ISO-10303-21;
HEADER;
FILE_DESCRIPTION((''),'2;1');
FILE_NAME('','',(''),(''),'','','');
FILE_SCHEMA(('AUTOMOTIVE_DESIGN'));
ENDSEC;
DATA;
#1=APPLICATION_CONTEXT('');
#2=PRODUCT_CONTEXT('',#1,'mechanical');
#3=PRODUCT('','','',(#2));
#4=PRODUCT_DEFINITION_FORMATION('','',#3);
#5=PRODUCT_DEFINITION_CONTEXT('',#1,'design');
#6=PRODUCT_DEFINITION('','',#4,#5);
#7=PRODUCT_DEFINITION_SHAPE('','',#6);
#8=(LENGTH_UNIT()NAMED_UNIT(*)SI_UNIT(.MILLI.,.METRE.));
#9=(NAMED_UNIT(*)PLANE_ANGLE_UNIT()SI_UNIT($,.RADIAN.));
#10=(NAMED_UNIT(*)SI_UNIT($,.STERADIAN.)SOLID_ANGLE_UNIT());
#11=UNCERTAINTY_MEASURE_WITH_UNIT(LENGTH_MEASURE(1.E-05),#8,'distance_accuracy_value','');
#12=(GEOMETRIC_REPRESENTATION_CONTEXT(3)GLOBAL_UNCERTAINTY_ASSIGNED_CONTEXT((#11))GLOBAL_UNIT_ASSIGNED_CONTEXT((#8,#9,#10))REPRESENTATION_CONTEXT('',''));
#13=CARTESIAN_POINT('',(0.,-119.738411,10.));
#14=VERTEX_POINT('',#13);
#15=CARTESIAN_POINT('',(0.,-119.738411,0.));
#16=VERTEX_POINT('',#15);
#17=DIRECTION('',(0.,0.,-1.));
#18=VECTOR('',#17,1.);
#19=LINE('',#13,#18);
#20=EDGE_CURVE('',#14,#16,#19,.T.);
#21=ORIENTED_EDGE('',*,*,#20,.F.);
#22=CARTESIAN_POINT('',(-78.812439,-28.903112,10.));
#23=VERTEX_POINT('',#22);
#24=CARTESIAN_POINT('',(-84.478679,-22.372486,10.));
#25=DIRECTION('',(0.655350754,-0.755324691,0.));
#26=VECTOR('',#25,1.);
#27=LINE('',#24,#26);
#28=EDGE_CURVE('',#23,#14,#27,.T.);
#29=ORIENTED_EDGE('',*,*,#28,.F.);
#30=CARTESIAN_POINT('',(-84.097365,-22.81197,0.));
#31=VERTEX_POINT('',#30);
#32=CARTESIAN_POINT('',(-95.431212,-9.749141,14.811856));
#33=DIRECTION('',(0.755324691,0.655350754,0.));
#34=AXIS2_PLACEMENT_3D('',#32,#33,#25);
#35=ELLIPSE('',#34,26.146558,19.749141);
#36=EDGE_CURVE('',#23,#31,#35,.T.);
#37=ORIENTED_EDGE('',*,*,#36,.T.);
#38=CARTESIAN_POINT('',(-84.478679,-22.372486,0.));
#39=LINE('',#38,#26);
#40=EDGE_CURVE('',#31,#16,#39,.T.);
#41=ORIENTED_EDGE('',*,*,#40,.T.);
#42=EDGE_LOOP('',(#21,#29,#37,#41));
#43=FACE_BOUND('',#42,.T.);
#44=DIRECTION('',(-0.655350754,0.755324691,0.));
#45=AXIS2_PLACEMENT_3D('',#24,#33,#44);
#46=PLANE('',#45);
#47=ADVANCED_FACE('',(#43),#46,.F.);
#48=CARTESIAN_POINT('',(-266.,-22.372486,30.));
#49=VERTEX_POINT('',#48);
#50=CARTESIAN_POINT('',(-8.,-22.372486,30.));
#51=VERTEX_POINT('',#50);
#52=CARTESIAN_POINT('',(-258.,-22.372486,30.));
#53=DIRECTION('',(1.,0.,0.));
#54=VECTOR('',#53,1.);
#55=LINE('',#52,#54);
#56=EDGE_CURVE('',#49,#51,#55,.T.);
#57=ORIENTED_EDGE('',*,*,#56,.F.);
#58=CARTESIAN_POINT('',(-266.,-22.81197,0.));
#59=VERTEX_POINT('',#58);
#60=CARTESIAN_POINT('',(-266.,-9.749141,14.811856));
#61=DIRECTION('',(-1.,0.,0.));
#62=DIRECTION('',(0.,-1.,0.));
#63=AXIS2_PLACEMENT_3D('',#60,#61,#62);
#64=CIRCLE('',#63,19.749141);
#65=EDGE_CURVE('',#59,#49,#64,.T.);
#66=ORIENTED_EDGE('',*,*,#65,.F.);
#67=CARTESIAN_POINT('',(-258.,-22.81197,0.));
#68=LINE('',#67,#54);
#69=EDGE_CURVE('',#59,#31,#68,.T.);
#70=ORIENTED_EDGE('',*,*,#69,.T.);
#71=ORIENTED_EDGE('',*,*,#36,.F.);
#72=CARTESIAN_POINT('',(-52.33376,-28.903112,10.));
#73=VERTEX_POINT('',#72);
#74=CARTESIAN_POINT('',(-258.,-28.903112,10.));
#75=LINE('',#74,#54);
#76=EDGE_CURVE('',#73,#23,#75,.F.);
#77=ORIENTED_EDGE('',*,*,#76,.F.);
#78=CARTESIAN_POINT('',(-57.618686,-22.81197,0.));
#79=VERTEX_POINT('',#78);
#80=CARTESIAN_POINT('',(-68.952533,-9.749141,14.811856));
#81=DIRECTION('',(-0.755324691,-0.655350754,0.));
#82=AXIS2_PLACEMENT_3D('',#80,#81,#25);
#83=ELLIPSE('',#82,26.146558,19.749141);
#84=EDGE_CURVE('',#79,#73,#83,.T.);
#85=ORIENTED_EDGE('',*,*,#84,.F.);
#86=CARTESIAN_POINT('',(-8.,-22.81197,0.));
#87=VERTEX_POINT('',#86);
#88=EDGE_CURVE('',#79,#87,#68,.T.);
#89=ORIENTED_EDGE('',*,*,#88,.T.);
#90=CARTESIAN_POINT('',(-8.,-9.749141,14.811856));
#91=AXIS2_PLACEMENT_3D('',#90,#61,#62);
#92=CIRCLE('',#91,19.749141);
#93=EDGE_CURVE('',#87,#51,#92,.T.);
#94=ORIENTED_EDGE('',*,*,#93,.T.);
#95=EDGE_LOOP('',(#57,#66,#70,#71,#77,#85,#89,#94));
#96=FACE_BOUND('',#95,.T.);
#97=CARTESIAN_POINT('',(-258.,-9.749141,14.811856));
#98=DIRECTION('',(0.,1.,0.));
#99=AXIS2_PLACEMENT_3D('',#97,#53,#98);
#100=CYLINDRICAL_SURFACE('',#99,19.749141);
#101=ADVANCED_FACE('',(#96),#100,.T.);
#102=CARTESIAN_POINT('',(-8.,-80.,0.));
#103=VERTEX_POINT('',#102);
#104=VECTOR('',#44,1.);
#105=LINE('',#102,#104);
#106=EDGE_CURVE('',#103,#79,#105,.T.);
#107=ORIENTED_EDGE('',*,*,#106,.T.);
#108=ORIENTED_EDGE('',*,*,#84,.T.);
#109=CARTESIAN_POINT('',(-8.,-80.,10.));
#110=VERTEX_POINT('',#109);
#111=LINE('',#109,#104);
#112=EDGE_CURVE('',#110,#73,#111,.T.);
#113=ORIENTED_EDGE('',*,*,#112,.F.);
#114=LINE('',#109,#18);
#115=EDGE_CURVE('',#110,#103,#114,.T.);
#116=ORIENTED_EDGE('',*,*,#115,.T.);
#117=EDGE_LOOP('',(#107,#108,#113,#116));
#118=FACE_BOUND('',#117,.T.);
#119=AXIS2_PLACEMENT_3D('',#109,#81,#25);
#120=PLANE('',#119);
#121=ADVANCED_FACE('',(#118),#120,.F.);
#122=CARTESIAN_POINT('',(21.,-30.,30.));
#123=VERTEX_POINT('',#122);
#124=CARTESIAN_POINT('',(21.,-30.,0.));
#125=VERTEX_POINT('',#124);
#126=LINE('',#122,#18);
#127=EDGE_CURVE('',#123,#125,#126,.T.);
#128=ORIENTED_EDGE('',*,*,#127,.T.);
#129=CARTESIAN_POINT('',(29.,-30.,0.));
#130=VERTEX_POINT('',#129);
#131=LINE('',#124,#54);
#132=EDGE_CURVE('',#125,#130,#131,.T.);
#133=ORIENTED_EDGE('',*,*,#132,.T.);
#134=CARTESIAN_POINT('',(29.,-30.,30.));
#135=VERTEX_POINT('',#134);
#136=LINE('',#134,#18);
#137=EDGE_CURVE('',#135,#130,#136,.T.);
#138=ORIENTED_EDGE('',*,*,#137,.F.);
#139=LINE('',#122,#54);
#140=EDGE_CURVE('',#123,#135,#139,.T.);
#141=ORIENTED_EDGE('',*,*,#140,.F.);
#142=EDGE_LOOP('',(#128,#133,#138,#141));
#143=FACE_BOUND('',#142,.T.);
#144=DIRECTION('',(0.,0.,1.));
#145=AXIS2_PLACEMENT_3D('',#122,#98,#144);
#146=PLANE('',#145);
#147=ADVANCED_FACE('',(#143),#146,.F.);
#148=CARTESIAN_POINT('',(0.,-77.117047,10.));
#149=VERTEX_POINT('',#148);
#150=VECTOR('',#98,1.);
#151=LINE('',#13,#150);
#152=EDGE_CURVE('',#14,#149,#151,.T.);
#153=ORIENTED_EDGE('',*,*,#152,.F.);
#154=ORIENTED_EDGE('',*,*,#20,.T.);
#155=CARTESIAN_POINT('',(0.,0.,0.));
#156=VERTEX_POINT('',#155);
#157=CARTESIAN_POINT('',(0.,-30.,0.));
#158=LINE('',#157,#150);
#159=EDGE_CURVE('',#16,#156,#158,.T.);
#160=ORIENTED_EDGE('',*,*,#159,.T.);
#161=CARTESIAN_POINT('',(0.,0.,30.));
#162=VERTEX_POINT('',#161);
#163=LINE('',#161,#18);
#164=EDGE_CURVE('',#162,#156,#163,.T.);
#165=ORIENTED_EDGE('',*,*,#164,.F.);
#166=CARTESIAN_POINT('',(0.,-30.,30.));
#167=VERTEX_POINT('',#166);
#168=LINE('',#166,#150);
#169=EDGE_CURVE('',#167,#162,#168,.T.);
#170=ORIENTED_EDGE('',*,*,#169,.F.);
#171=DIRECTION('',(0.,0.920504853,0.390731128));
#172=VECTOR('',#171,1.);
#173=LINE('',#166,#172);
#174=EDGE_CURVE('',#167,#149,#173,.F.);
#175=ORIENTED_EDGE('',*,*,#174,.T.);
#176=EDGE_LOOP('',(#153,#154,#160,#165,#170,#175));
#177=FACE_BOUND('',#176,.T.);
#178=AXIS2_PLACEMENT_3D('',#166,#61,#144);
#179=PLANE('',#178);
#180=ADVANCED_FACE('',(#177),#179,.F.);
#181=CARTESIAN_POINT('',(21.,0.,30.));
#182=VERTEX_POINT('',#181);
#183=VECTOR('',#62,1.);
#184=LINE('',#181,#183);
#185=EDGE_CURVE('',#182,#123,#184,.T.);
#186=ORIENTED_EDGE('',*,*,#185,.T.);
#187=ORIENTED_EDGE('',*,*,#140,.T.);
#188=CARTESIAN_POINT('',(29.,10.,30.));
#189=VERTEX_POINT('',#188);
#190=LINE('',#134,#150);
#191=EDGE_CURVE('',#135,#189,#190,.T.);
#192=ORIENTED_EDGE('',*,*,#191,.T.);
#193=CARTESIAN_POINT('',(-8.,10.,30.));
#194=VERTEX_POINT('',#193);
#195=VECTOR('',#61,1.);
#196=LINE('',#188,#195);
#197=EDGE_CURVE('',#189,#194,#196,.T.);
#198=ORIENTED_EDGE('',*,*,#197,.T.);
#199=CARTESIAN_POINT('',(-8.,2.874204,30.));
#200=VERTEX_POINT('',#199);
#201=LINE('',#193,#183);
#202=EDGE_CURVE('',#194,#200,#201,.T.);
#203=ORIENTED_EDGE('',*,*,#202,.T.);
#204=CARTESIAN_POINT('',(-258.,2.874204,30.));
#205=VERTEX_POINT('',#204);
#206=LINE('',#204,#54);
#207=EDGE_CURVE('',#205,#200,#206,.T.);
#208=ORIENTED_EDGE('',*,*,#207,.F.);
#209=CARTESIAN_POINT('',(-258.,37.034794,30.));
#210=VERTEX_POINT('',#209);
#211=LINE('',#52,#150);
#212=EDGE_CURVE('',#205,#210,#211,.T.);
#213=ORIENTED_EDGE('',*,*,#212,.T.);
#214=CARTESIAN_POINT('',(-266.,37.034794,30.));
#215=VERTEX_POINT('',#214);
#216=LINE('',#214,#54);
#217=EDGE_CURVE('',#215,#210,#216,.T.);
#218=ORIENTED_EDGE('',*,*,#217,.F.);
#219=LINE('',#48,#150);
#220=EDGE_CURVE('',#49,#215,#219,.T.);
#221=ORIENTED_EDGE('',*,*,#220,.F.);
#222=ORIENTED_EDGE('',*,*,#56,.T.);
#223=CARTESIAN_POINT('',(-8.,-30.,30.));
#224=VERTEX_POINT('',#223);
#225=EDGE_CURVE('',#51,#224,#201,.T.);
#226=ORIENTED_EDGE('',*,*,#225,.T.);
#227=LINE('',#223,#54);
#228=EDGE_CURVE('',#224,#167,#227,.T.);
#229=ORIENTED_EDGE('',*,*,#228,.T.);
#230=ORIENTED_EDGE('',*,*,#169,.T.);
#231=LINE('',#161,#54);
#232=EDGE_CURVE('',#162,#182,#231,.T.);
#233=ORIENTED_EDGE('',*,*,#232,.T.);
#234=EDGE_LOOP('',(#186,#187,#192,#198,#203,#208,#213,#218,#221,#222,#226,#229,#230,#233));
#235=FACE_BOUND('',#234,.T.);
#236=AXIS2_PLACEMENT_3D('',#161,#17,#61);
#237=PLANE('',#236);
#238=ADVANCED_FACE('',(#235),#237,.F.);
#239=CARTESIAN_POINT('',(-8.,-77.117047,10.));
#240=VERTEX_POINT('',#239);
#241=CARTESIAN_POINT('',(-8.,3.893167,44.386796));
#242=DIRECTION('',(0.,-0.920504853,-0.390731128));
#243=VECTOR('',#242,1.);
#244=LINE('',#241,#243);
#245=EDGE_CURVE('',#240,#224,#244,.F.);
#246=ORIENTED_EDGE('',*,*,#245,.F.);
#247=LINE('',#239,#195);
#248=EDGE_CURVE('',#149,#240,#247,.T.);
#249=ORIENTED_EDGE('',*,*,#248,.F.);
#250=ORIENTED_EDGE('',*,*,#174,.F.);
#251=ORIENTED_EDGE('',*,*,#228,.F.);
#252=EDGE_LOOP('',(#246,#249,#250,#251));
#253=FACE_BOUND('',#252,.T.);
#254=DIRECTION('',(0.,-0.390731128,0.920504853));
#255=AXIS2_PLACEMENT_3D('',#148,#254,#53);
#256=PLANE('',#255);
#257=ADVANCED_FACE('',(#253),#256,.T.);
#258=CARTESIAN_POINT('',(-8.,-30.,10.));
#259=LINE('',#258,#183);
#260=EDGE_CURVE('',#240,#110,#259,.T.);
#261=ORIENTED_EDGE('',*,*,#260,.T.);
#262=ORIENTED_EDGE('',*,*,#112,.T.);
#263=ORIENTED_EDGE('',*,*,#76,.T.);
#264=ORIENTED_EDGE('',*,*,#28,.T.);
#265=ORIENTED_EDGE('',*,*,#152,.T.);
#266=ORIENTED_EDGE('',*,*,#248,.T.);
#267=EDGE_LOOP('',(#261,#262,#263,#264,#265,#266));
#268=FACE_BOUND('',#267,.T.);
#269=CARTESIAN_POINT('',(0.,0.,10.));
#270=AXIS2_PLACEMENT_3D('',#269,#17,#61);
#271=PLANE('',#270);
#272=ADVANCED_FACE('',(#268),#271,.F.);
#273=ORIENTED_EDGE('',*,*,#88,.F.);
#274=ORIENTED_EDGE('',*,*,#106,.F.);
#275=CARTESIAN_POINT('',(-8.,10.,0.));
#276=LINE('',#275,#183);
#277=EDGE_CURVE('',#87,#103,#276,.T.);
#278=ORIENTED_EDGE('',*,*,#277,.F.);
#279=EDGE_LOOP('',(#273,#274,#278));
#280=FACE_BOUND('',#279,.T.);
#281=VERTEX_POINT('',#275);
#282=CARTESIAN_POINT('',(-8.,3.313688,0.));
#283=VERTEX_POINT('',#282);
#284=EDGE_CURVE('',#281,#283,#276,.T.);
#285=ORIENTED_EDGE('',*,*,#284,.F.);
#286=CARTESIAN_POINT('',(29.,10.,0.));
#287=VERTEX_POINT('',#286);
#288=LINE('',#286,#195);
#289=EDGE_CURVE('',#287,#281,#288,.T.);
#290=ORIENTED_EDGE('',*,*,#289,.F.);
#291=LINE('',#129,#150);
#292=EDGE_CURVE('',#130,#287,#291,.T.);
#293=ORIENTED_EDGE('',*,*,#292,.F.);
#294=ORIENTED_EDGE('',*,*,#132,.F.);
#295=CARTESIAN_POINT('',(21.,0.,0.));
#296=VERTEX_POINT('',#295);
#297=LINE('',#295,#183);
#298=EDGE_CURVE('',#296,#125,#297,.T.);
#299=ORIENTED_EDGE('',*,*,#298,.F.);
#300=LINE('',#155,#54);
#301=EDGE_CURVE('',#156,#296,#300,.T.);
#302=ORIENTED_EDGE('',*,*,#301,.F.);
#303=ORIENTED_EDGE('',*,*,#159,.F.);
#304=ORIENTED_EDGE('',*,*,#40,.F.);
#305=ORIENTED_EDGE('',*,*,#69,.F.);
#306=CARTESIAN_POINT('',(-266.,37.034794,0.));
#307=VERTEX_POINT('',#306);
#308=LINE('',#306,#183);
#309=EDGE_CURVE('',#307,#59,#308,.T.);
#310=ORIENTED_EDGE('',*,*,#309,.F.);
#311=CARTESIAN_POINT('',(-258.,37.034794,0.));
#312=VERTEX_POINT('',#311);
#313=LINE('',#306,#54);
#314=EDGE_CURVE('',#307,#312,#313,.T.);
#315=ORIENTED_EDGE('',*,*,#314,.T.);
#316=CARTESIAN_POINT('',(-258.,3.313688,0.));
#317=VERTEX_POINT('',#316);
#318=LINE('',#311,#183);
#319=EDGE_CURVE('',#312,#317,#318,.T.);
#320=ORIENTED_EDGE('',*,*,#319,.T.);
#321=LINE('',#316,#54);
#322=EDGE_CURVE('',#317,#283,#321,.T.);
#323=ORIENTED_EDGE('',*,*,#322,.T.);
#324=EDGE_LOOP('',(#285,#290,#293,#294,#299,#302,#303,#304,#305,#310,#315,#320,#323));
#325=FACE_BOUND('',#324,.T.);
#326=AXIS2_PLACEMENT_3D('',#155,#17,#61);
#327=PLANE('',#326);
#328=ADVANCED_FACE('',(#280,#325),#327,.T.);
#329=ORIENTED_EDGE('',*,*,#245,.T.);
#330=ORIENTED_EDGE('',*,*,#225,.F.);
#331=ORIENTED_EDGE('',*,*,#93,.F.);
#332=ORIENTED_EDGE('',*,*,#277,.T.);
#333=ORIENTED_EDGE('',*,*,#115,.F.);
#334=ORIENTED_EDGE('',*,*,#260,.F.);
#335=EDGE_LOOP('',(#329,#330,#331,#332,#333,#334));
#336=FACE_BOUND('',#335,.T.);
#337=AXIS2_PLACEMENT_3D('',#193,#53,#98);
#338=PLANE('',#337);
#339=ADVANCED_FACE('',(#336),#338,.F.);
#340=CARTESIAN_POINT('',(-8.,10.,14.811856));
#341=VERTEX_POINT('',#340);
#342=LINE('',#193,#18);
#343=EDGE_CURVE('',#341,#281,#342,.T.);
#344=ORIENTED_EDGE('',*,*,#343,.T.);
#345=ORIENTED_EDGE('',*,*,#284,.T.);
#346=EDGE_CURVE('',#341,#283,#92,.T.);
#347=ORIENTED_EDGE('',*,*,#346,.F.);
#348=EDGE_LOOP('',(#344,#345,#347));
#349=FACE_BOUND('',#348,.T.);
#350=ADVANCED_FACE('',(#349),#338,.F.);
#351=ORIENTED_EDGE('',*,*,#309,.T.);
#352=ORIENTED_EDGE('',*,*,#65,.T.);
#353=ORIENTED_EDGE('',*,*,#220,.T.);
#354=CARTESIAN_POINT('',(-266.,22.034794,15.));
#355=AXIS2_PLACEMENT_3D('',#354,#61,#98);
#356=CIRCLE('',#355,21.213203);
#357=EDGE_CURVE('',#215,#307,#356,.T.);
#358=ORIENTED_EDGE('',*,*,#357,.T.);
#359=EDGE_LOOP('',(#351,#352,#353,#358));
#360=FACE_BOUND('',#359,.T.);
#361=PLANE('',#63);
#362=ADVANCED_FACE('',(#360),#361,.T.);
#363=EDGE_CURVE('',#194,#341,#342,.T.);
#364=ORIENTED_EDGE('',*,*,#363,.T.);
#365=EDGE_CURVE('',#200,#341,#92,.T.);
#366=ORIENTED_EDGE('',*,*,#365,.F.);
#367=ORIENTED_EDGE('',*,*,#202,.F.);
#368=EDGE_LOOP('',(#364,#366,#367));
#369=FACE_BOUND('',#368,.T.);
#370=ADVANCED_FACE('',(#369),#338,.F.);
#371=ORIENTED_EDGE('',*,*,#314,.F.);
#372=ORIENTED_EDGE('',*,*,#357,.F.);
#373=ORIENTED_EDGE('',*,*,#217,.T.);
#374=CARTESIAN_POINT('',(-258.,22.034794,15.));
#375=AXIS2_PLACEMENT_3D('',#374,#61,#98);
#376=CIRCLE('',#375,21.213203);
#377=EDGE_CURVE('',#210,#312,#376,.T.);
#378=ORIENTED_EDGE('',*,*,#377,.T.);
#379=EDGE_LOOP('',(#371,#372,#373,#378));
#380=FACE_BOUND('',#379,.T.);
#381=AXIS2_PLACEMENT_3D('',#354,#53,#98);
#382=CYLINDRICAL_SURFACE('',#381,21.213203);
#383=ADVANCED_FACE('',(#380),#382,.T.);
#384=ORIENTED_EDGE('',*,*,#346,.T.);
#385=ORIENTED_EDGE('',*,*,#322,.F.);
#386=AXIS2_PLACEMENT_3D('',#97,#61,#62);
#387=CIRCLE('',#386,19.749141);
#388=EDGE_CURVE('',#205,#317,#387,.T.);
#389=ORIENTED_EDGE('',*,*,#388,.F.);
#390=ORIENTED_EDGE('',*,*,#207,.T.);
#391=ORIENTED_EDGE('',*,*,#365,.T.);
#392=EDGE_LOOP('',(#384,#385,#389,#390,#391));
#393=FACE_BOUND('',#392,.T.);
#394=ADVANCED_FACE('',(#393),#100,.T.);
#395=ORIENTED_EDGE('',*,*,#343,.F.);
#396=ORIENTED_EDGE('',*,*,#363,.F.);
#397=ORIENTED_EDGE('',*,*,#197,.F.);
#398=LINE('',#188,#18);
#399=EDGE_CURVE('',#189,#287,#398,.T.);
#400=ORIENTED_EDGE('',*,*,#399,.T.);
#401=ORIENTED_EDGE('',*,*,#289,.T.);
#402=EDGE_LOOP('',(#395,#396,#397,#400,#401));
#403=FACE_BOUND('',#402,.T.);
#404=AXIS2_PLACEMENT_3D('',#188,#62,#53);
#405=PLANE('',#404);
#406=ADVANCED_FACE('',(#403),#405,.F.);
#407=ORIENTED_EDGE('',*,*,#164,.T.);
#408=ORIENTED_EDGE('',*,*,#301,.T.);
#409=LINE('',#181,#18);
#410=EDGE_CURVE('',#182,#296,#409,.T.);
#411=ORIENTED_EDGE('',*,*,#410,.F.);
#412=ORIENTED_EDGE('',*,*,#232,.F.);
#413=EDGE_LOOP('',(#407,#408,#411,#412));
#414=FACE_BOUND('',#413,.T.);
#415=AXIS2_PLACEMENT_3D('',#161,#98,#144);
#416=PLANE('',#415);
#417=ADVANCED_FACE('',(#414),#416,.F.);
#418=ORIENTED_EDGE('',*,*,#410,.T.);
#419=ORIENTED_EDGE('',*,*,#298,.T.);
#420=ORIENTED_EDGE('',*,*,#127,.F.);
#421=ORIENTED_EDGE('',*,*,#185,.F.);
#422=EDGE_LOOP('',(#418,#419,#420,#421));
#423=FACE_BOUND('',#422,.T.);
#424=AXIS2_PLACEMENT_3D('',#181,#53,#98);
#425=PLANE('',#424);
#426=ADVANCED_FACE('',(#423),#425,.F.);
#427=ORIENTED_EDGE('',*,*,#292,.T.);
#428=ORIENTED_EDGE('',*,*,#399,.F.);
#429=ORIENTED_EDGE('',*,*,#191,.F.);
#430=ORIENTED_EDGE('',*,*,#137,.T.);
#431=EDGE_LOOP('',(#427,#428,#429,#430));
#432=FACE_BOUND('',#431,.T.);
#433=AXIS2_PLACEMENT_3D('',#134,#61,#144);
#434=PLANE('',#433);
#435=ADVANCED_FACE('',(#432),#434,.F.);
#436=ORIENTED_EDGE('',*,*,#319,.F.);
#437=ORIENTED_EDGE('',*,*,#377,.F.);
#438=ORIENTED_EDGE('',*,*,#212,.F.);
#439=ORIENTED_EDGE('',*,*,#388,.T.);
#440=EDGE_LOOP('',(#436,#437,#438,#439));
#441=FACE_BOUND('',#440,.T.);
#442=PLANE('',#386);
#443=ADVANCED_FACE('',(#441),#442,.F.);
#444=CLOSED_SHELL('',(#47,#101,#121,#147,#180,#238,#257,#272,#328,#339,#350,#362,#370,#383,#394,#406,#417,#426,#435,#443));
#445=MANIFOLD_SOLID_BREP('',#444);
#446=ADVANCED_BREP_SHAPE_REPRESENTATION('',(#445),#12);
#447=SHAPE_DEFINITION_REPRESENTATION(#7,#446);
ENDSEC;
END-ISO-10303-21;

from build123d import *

# Parameters (mm, degrees)
BOSS_EXTRUDE1_DEPTH = 30
BOSS_EXTRUDE2_DEPTH = 250
BOSS_EXTRUDE3_DEPTH = 8
BOSS_EXTRUDE4_DEPTH = 10
CHAMFER1_SIZE2      = 47.117047316
CHAMFER1_SIZE       = 20


with BuildPart() as part:
    # Sketch1 → Boss-Extrude1 (new body)
    with BuildSketch(Plane.XY):
        Polygon((0, 0), (21, 0), (21, -30), (29, -30), (29, 10), (-8, 10), (-8, -30), (0, -30), align=None)
    extrude(amount=BOSS_EXTRUDE1_DEPTH)

    # Sketch2 → Boss-Extrude2 (add)
    with BuildSketch(Plane.ZY.offset(8)):
        with BuildLine():
            Line((0, -22.811969958), (0, 3.313687916))
            ThreePointArc((0, 3.313687916), (15.101138891, 9.997881194), (30, 2.874204248))
            Line((30, 2.874204248), (30, -22.37248629))
            ThreePointArc((30, -22.37248629), (15.101138891, -29.496163235), (0, -22.811969958))
        make_face()
    extrude(amount=BOSS_EXTRUDE2_DEPTH)

    # Sketch3 → Boss-Extrude3 (add)
    with BuildSketch(Plane.ZY.offset(258)):
        with BuildLine():
            Line((30, -22.37248629), (30, 37.034794094))
            ThreePointArc((30, 37.034794094), (15, 43.247997529), (0, 37.034794094))
            Line((0, 37.034794094), (0, -22.811969958))
            ThreePointArc((0, -22.811969958), (15.101138891, -29.496163235), (30, -22.37248629))
        make_face()
    extrude(amount=BOSS_EXTRUDE3_DEPTH)

    # Sketch4 → Boss-Extrude4 (add)
    with BuildSketch(Plane.XY):
        Polygon((-84.478678947, -22.37248629), (0, -119.738410874), (0, -30), (-8, -30), (-8, -80), (-58, -22.37248629), align=None)
    extrude(amount=BOSS_EXTRUDE4_DEPTH)

    # Chamfer1
    chamfer1_edges = [part.edges().sort_by_distance(p)[0] for p in [
        (-4, -30, 10),
    ]]
    chamfer1_side = [part.faces().sort_by_distance(p)[0] for p in [
        (-4, -30, 10.4),
    ]]
    chamfer(chamfer1_edges, length=CHAMFER1_SIZE - 0.0001, length2=CHAMFER1_SIZE2 - 0.0001, reference=chamfer1_side[0])  # a hair under: the kernel refuses the full size


solid = part.part
